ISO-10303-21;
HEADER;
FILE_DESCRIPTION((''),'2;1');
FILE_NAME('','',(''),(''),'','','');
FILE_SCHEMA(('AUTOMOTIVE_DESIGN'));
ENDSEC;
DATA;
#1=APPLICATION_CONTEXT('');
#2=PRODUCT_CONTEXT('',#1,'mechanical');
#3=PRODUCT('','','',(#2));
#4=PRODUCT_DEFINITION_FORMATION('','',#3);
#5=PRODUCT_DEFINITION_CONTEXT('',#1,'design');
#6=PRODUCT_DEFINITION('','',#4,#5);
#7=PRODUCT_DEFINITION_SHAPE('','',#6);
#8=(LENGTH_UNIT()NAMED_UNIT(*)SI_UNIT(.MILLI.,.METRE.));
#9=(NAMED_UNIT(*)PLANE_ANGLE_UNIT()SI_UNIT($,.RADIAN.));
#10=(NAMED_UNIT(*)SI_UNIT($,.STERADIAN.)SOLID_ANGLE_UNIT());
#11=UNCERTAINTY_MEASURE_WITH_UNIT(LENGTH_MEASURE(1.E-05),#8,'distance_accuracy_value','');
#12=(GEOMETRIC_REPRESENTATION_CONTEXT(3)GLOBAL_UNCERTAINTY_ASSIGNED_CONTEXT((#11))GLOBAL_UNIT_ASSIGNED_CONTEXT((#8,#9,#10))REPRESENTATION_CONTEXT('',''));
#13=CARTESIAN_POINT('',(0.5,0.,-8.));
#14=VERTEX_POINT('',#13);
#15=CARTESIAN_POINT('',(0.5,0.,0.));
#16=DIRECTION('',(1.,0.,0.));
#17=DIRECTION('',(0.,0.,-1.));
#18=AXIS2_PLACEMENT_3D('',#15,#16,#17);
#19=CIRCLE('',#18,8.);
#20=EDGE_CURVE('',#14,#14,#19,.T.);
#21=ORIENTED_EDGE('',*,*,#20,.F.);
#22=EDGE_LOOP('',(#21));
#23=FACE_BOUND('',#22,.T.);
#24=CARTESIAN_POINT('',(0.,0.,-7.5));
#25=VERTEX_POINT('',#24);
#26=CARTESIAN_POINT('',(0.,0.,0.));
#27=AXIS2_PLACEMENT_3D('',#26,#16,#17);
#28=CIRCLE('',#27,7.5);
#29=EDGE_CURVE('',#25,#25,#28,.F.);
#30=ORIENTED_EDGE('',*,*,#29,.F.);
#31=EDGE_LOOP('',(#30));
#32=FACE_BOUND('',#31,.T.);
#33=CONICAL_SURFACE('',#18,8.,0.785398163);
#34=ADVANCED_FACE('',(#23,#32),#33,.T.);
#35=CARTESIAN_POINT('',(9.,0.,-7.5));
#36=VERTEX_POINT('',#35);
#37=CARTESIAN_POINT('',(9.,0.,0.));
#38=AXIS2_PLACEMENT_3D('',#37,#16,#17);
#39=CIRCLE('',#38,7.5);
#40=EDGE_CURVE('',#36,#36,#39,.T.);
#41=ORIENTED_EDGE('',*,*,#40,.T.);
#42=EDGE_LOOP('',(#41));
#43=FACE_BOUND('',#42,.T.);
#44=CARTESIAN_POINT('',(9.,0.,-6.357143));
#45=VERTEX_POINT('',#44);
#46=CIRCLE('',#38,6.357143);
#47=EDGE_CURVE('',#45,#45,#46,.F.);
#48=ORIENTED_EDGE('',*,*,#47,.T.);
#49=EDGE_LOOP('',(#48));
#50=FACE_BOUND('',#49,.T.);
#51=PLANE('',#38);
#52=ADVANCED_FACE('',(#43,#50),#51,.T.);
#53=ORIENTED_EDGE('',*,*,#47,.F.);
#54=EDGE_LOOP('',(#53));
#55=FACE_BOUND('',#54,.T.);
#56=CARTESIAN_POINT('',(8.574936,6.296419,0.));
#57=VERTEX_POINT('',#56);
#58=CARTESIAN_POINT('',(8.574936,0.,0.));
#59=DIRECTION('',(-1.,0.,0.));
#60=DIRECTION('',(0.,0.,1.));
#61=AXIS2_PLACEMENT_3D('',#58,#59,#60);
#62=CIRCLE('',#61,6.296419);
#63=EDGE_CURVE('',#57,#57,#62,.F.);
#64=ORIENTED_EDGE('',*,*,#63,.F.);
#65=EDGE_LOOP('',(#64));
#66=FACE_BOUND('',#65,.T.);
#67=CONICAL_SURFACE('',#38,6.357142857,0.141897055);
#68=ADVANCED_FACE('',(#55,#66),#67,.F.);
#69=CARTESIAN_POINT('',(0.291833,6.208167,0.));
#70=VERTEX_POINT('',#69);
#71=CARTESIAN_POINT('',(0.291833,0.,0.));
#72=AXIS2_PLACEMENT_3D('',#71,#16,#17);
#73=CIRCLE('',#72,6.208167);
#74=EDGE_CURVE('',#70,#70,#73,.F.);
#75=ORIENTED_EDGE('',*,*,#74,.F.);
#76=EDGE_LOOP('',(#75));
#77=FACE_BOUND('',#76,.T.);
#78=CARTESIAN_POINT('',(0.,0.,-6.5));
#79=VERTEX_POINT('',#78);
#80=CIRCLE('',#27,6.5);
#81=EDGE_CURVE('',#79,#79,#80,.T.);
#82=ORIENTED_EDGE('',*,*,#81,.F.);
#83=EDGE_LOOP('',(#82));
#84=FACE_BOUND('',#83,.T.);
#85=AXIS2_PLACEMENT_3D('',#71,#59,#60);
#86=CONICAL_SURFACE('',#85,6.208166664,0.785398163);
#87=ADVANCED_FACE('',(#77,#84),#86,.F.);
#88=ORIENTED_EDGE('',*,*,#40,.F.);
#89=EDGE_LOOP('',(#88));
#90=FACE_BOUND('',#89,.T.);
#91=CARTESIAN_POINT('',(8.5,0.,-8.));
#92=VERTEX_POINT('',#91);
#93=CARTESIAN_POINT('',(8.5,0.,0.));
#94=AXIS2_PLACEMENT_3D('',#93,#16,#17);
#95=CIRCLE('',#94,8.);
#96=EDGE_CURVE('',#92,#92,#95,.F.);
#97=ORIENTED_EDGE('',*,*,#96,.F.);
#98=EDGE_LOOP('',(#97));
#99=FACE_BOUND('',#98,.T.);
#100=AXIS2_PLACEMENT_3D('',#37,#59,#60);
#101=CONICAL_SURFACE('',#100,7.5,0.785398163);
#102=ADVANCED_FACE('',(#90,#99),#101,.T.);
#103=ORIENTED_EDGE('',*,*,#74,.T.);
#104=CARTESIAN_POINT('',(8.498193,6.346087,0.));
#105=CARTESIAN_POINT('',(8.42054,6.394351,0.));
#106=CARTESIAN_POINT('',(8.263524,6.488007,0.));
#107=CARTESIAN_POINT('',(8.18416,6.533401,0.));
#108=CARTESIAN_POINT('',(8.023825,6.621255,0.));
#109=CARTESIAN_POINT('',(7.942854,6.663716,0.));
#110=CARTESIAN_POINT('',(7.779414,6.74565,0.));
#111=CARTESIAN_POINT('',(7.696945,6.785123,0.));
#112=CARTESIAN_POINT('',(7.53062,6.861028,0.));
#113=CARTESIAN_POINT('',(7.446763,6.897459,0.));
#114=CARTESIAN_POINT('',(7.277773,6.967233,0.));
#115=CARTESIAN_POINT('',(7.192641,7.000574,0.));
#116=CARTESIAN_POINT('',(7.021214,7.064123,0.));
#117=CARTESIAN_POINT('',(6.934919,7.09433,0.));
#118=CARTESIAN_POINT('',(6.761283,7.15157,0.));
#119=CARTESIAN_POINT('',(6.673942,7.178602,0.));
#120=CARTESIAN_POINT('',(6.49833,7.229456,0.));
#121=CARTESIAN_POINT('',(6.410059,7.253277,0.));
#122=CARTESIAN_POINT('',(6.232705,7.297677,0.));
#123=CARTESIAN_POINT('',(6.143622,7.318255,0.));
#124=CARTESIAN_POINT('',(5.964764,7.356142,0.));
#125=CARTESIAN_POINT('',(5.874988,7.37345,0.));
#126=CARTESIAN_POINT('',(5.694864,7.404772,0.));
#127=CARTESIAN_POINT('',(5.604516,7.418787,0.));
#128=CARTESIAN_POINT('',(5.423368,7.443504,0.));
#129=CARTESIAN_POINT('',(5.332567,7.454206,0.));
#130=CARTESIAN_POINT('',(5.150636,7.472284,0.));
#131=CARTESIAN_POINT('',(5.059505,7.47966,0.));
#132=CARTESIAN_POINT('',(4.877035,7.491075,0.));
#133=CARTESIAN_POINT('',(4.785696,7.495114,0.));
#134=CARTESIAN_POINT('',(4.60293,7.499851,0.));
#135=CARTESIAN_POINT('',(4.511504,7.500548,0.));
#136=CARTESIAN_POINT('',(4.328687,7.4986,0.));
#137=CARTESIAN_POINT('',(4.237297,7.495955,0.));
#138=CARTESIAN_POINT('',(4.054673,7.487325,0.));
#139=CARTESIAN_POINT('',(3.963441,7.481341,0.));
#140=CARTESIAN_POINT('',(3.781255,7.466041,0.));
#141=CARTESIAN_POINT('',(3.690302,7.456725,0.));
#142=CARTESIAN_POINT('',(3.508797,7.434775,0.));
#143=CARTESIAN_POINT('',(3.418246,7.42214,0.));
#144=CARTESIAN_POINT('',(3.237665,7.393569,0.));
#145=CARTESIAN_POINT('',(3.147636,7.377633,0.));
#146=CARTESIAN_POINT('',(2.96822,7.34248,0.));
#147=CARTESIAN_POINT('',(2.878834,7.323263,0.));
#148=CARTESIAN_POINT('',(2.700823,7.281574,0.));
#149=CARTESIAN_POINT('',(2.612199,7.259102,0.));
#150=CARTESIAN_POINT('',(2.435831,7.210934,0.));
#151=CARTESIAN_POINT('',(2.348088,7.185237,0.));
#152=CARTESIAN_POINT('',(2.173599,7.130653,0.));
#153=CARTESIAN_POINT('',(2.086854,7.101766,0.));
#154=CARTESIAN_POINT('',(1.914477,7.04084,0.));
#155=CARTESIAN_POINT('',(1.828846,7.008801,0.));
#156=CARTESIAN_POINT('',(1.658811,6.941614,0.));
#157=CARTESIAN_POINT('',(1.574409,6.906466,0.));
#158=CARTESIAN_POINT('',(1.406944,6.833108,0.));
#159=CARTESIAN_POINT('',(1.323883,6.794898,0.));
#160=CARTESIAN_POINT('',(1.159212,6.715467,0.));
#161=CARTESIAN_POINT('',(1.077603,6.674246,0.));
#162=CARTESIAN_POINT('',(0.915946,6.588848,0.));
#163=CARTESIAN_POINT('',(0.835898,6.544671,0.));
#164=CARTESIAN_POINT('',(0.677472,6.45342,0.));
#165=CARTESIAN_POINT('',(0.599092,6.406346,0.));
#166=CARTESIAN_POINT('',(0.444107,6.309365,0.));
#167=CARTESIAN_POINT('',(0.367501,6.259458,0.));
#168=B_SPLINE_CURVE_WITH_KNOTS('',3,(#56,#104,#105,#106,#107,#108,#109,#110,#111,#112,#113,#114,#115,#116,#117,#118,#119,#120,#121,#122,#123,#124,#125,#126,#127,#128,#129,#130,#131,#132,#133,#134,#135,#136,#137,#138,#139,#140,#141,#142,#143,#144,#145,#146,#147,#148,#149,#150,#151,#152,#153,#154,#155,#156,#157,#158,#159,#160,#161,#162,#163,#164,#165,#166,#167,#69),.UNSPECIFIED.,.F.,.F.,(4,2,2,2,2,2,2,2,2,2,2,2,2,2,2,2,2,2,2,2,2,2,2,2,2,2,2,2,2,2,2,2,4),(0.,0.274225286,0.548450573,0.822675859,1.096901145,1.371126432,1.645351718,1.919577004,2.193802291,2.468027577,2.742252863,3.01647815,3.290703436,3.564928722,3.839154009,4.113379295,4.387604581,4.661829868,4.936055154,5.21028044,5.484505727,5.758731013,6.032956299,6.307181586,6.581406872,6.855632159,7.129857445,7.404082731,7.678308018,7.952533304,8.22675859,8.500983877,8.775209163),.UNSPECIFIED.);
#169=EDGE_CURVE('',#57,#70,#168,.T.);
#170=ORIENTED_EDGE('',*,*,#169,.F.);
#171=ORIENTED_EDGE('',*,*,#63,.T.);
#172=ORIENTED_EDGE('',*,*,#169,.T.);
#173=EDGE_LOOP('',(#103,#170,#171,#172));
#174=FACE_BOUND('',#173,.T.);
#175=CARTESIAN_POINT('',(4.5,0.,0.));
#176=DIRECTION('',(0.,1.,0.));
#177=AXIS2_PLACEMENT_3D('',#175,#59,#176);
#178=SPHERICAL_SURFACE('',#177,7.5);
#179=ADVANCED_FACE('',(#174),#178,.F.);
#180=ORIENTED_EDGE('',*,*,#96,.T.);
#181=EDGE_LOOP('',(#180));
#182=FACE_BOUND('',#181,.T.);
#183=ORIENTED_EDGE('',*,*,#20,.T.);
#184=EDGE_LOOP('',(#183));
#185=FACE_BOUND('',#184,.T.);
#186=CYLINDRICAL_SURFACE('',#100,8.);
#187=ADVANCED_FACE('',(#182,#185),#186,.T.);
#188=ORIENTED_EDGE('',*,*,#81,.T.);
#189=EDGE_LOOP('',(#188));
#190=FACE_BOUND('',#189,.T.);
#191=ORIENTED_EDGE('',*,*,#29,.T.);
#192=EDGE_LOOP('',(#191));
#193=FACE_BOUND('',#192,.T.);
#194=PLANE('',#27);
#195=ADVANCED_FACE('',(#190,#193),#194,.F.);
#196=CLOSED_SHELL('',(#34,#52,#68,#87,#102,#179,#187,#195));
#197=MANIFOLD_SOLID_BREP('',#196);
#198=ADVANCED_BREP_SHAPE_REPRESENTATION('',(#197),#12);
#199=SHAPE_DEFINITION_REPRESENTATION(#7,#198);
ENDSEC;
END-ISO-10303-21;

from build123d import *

# Parameters (mm, degrees)
SKETCH_1_R       = 8
EXTRUDE_1_DEPTH  = 9
CHAMFER_1_SIZE   = 0.357142857
CHAMFER_1_SIZE_2 = 0.5
CHAMFER_2_SIZE   = 0.5


with BuildPart() as part:
    # Эскиз1 → Бобышка-Вытянуть1 (new body)
    with BuildSketch(Plane(origin=(0, 0, 0), x_dir=(0, 0, -1), z_dir=(1, 0, 0))):
        Circle(SKETCH_1_R)
    extrude(amount=EXTRUDE_1_DEPTH)

    # Эскиз2 → Вырез-Повернуть1 (revolve, cut)
    with BuildSketch(Plane.XY):
        with BuildLine():
            Line((-3, 0), (12, 0))
            ThreePointArc((12, 0), (4.5, 7.5), (-3, 0))
        make_face()
    revolve(axis=Axis((0, 0, 0), (1, 0, 0)), mode=Mode.SUBTRACT)

    # Фаска1
    # the kernel refuses this chamfer: 0.5, 0.357142857 mm, written as the material it takes off along each edge
    with BuildSketch(Plane(origin=(9, 0, 0), x_dir=(0, 1, 0), z_dir=(0, 0, 1))) as chamfer_1_piece_1:
        with BuildLine():
            Line((6 + CHAMFER_1_SIZE, 0), (6.296419414, 0.425064103))
            ThreePointArc((6.296419414, 0.425064103), (6.1560674, 0.215979206), (6, 0))
            Line((6, 0), (6 + CHAMFER_1_SIZE, 0))
        make_face()
    revolve(axis=Axis((9, 0, 0), (-1, 0, 0)), mode=Mode.SUBTRACT)
    with BuildSketch(Plane(origin=(0, 0, 0), x_dir=(0, 1, 0), z_dir=(0, 0, 1))) as chamfer_1_piece_2:
        with BuildLine():
            Line((6 + CHAMFER_1_SIZE_2, 0), (6.208166664, -0.291833336))
            ThreePointArc((6.208166664, -0.291833336), (6.10678692, -0.146018659), (6, 0))
            Line((6, 0), (6 + CHAMFER_1_SIZE_2, 0))
        make_face()
    revolve(axis=Axis((0, 0, 0), (-1, 0, 0)), mode=Mode.SUBTRACT)

    # Фаска2
    chamfer_2_edges = [part.edges().sort_by_distance(p)[0] for p in [
        (0, 0, 8),
        (9, 0, 8),
    ]]
    chamfer(chamfer_2_edges, length=CHAMFER_2_SIZE)


solid = part.part
